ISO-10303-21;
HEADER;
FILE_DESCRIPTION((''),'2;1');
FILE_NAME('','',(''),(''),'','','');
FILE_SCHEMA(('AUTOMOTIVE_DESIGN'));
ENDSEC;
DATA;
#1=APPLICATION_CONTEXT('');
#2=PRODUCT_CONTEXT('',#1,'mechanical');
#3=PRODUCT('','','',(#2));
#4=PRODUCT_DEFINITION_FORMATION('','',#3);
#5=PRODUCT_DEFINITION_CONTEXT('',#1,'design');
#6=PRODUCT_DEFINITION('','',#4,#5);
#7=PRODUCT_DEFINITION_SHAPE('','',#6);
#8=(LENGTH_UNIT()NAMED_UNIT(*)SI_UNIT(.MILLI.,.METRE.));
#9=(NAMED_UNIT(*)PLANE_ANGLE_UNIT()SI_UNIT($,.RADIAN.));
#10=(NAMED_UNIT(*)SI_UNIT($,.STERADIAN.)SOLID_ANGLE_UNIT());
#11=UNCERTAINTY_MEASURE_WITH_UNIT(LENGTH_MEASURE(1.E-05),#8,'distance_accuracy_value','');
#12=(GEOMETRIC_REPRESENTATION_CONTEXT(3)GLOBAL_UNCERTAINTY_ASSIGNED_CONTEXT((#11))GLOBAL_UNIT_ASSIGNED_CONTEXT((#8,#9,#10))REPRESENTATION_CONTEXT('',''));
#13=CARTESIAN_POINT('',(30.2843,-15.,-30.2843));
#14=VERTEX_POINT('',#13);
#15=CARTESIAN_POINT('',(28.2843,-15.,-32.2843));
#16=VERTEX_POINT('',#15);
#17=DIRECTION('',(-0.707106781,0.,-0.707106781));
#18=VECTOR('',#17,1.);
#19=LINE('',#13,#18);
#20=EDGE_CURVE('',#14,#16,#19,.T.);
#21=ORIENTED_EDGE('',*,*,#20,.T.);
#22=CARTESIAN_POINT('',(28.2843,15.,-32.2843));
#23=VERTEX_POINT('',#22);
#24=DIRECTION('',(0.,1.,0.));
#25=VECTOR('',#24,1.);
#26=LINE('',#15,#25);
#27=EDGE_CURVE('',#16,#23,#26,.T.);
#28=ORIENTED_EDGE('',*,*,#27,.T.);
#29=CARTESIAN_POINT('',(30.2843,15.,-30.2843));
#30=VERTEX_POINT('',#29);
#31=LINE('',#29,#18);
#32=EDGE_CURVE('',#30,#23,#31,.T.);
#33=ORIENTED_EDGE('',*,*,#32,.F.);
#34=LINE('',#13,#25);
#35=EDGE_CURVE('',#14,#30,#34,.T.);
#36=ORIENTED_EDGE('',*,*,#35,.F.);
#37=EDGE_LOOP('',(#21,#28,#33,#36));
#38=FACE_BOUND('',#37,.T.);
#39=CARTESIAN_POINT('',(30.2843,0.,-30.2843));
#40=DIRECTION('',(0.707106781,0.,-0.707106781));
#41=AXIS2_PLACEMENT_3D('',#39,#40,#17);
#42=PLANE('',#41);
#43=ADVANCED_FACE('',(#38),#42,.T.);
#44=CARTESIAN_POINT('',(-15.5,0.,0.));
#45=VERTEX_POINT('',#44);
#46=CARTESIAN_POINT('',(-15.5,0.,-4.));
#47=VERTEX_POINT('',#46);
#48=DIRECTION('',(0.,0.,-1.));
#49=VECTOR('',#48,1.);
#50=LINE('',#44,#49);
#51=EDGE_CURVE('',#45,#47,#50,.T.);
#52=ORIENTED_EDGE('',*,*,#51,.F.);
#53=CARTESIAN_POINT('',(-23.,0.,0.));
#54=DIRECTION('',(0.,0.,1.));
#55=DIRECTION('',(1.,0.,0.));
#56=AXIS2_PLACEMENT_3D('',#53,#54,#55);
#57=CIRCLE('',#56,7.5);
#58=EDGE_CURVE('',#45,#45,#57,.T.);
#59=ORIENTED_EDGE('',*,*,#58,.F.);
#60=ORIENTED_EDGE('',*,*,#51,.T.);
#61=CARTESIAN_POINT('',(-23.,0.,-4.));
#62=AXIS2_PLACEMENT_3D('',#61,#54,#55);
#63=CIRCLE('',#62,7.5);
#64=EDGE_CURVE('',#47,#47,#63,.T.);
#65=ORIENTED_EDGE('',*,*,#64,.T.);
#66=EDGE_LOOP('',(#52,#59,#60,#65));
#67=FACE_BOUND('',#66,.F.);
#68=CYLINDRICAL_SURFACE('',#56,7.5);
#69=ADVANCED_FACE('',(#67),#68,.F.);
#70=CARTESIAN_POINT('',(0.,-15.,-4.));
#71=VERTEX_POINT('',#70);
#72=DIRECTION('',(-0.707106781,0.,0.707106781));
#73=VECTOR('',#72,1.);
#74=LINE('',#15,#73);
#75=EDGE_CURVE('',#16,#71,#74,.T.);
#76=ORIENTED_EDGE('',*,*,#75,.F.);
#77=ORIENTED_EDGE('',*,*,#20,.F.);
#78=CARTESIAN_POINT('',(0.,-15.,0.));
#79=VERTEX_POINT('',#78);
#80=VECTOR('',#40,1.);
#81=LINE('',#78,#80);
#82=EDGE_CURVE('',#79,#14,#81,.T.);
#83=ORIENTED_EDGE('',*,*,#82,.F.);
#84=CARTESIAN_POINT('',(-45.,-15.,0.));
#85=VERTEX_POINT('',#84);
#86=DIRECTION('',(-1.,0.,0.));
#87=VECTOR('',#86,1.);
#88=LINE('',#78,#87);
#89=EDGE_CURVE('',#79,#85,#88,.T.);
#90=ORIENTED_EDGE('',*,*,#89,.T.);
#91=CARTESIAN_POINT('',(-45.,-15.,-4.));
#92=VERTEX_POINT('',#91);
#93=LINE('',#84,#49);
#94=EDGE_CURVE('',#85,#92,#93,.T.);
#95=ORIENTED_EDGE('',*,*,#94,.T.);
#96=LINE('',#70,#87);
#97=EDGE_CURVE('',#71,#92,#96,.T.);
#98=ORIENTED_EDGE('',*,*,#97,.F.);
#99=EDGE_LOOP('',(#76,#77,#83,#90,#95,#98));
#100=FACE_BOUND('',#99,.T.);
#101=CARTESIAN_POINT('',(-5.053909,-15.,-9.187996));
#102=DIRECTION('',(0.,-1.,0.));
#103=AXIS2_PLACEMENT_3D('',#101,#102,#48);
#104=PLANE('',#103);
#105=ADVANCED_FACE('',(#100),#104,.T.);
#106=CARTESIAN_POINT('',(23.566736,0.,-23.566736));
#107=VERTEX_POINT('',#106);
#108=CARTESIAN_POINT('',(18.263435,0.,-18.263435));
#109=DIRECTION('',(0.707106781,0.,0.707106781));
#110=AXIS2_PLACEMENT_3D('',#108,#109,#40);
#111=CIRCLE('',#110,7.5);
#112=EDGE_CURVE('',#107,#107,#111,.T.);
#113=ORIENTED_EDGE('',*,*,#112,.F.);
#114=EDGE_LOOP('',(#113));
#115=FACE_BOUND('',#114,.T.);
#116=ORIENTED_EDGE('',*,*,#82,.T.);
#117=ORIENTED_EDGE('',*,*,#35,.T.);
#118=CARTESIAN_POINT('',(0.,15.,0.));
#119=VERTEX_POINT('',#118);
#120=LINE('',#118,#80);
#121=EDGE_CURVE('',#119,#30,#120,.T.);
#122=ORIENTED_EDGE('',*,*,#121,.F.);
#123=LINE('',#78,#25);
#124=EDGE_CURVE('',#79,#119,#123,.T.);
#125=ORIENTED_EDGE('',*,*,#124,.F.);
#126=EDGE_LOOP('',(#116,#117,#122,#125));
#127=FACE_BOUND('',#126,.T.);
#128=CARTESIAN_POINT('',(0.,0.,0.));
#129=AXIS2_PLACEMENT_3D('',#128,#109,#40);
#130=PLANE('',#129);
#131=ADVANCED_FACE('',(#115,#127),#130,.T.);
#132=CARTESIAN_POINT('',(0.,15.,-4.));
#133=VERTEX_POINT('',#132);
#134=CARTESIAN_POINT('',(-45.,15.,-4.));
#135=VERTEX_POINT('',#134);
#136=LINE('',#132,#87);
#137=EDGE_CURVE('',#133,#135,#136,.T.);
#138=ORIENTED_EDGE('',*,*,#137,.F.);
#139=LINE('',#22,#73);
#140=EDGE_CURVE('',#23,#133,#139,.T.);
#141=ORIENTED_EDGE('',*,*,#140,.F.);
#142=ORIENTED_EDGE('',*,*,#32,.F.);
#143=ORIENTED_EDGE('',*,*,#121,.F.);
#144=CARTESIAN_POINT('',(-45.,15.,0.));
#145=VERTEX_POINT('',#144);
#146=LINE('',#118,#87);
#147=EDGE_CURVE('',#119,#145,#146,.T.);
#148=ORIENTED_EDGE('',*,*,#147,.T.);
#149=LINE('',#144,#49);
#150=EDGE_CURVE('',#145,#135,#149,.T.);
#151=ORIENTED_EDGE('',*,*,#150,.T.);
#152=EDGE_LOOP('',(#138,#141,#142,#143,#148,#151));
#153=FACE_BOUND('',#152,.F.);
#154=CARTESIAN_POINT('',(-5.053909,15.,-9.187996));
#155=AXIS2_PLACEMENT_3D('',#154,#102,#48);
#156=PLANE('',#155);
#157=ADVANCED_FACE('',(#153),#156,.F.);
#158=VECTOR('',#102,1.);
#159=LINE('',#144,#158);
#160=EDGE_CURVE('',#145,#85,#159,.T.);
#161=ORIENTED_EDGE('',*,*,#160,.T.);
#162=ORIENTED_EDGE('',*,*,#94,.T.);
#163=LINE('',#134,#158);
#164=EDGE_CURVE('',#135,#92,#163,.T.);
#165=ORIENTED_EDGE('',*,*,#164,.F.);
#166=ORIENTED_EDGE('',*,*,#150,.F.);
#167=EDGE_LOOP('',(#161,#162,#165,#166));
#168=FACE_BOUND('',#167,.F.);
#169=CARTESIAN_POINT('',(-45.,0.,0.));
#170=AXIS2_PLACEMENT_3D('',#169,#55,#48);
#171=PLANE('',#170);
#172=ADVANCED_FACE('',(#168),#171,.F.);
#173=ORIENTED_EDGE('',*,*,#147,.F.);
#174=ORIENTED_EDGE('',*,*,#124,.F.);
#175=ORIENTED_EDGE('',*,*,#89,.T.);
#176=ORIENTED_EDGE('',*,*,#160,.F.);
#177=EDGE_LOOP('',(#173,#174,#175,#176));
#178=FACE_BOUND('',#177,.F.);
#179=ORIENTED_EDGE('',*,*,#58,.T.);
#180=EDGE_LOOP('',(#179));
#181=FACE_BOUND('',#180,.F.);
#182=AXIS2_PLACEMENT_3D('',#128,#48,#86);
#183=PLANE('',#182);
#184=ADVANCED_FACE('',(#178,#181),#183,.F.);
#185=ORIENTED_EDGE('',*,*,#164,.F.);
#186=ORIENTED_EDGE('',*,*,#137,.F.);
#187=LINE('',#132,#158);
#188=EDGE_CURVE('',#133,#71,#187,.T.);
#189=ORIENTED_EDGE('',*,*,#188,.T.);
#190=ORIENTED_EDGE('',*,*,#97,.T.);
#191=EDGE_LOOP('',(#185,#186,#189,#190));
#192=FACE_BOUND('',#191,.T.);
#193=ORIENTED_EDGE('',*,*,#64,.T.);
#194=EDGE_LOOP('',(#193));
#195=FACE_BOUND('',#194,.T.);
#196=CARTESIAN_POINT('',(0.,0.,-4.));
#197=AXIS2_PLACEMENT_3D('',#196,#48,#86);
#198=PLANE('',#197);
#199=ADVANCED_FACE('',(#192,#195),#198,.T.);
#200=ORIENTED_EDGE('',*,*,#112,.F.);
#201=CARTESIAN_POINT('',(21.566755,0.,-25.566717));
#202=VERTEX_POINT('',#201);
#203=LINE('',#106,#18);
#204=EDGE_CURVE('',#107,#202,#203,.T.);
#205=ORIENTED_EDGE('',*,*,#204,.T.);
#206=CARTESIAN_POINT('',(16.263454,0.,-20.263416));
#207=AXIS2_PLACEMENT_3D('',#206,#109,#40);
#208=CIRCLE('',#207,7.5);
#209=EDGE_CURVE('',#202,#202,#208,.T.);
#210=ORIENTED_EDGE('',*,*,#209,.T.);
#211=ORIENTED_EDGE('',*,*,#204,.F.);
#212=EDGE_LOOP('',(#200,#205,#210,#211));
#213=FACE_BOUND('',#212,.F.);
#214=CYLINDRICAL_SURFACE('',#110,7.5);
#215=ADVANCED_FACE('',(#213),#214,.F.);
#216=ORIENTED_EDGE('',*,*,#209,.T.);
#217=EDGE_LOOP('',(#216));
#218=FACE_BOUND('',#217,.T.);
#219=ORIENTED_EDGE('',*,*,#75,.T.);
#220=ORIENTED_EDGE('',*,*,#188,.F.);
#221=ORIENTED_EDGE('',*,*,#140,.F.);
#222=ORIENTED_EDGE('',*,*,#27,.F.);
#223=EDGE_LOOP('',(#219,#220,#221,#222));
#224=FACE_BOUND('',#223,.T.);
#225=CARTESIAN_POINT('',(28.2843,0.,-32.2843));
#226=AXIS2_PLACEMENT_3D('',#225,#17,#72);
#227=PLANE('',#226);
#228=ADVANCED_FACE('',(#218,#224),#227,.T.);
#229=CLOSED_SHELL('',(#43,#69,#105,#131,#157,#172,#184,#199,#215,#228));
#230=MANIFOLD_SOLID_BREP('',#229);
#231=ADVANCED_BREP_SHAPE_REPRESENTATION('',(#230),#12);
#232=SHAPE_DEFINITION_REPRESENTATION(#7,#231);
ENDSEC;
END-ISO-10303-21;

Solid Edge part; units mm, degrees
sketch "Sketch1" plane through (0, 0, 0) normal (0, -1, 0) x (1, 0, 0)
  line L0 (0, 0) -> (-45, 0)
  line L1 (-45, 0) -> (-45, -4)
  line L2 (0, -4) -> (-45, -4)
  line L3 (28.2843, -32.2843) -> (0, -4)
  line L4 (30.2843, -30.2843) -> (28.2843, -32.2843)
  line L5 (0, 0) -> (30.2843, -30.2843)
  dimension "D1" = 4
  dimension "D2" = 45
  dimension "D3" = 40
extrude "Protrusion1" add sketch "Sketch1" along normal mid plane 30
sketch "Sketch2" plane through (-15, 0, 0) normal (0, 0, 1) x (1, 0, 0)
  circle A0 centre (-8, 0) radius 7.5
  dimension "D1" = 15
  dimension "D2" = 23
extrude "Cutout1" cut sketch "Sketch2" against normal up to surface (4 mm away)
sketch "Sketch3" plane through (10.6066, 0, -10.6066) normal (0.7071068, 0, 0.7071068) x (0.7071068, 0, -0.7071068)
  circle A0 centre (10.8284, 0) radius 7.5
  dimension "D1" = 15
  dimension "D2" = 23
extrude "Cutout2" cut sketch "Sketch3" against normal up to surface (2.8284 mm away)
properties material "Stainless steel"
